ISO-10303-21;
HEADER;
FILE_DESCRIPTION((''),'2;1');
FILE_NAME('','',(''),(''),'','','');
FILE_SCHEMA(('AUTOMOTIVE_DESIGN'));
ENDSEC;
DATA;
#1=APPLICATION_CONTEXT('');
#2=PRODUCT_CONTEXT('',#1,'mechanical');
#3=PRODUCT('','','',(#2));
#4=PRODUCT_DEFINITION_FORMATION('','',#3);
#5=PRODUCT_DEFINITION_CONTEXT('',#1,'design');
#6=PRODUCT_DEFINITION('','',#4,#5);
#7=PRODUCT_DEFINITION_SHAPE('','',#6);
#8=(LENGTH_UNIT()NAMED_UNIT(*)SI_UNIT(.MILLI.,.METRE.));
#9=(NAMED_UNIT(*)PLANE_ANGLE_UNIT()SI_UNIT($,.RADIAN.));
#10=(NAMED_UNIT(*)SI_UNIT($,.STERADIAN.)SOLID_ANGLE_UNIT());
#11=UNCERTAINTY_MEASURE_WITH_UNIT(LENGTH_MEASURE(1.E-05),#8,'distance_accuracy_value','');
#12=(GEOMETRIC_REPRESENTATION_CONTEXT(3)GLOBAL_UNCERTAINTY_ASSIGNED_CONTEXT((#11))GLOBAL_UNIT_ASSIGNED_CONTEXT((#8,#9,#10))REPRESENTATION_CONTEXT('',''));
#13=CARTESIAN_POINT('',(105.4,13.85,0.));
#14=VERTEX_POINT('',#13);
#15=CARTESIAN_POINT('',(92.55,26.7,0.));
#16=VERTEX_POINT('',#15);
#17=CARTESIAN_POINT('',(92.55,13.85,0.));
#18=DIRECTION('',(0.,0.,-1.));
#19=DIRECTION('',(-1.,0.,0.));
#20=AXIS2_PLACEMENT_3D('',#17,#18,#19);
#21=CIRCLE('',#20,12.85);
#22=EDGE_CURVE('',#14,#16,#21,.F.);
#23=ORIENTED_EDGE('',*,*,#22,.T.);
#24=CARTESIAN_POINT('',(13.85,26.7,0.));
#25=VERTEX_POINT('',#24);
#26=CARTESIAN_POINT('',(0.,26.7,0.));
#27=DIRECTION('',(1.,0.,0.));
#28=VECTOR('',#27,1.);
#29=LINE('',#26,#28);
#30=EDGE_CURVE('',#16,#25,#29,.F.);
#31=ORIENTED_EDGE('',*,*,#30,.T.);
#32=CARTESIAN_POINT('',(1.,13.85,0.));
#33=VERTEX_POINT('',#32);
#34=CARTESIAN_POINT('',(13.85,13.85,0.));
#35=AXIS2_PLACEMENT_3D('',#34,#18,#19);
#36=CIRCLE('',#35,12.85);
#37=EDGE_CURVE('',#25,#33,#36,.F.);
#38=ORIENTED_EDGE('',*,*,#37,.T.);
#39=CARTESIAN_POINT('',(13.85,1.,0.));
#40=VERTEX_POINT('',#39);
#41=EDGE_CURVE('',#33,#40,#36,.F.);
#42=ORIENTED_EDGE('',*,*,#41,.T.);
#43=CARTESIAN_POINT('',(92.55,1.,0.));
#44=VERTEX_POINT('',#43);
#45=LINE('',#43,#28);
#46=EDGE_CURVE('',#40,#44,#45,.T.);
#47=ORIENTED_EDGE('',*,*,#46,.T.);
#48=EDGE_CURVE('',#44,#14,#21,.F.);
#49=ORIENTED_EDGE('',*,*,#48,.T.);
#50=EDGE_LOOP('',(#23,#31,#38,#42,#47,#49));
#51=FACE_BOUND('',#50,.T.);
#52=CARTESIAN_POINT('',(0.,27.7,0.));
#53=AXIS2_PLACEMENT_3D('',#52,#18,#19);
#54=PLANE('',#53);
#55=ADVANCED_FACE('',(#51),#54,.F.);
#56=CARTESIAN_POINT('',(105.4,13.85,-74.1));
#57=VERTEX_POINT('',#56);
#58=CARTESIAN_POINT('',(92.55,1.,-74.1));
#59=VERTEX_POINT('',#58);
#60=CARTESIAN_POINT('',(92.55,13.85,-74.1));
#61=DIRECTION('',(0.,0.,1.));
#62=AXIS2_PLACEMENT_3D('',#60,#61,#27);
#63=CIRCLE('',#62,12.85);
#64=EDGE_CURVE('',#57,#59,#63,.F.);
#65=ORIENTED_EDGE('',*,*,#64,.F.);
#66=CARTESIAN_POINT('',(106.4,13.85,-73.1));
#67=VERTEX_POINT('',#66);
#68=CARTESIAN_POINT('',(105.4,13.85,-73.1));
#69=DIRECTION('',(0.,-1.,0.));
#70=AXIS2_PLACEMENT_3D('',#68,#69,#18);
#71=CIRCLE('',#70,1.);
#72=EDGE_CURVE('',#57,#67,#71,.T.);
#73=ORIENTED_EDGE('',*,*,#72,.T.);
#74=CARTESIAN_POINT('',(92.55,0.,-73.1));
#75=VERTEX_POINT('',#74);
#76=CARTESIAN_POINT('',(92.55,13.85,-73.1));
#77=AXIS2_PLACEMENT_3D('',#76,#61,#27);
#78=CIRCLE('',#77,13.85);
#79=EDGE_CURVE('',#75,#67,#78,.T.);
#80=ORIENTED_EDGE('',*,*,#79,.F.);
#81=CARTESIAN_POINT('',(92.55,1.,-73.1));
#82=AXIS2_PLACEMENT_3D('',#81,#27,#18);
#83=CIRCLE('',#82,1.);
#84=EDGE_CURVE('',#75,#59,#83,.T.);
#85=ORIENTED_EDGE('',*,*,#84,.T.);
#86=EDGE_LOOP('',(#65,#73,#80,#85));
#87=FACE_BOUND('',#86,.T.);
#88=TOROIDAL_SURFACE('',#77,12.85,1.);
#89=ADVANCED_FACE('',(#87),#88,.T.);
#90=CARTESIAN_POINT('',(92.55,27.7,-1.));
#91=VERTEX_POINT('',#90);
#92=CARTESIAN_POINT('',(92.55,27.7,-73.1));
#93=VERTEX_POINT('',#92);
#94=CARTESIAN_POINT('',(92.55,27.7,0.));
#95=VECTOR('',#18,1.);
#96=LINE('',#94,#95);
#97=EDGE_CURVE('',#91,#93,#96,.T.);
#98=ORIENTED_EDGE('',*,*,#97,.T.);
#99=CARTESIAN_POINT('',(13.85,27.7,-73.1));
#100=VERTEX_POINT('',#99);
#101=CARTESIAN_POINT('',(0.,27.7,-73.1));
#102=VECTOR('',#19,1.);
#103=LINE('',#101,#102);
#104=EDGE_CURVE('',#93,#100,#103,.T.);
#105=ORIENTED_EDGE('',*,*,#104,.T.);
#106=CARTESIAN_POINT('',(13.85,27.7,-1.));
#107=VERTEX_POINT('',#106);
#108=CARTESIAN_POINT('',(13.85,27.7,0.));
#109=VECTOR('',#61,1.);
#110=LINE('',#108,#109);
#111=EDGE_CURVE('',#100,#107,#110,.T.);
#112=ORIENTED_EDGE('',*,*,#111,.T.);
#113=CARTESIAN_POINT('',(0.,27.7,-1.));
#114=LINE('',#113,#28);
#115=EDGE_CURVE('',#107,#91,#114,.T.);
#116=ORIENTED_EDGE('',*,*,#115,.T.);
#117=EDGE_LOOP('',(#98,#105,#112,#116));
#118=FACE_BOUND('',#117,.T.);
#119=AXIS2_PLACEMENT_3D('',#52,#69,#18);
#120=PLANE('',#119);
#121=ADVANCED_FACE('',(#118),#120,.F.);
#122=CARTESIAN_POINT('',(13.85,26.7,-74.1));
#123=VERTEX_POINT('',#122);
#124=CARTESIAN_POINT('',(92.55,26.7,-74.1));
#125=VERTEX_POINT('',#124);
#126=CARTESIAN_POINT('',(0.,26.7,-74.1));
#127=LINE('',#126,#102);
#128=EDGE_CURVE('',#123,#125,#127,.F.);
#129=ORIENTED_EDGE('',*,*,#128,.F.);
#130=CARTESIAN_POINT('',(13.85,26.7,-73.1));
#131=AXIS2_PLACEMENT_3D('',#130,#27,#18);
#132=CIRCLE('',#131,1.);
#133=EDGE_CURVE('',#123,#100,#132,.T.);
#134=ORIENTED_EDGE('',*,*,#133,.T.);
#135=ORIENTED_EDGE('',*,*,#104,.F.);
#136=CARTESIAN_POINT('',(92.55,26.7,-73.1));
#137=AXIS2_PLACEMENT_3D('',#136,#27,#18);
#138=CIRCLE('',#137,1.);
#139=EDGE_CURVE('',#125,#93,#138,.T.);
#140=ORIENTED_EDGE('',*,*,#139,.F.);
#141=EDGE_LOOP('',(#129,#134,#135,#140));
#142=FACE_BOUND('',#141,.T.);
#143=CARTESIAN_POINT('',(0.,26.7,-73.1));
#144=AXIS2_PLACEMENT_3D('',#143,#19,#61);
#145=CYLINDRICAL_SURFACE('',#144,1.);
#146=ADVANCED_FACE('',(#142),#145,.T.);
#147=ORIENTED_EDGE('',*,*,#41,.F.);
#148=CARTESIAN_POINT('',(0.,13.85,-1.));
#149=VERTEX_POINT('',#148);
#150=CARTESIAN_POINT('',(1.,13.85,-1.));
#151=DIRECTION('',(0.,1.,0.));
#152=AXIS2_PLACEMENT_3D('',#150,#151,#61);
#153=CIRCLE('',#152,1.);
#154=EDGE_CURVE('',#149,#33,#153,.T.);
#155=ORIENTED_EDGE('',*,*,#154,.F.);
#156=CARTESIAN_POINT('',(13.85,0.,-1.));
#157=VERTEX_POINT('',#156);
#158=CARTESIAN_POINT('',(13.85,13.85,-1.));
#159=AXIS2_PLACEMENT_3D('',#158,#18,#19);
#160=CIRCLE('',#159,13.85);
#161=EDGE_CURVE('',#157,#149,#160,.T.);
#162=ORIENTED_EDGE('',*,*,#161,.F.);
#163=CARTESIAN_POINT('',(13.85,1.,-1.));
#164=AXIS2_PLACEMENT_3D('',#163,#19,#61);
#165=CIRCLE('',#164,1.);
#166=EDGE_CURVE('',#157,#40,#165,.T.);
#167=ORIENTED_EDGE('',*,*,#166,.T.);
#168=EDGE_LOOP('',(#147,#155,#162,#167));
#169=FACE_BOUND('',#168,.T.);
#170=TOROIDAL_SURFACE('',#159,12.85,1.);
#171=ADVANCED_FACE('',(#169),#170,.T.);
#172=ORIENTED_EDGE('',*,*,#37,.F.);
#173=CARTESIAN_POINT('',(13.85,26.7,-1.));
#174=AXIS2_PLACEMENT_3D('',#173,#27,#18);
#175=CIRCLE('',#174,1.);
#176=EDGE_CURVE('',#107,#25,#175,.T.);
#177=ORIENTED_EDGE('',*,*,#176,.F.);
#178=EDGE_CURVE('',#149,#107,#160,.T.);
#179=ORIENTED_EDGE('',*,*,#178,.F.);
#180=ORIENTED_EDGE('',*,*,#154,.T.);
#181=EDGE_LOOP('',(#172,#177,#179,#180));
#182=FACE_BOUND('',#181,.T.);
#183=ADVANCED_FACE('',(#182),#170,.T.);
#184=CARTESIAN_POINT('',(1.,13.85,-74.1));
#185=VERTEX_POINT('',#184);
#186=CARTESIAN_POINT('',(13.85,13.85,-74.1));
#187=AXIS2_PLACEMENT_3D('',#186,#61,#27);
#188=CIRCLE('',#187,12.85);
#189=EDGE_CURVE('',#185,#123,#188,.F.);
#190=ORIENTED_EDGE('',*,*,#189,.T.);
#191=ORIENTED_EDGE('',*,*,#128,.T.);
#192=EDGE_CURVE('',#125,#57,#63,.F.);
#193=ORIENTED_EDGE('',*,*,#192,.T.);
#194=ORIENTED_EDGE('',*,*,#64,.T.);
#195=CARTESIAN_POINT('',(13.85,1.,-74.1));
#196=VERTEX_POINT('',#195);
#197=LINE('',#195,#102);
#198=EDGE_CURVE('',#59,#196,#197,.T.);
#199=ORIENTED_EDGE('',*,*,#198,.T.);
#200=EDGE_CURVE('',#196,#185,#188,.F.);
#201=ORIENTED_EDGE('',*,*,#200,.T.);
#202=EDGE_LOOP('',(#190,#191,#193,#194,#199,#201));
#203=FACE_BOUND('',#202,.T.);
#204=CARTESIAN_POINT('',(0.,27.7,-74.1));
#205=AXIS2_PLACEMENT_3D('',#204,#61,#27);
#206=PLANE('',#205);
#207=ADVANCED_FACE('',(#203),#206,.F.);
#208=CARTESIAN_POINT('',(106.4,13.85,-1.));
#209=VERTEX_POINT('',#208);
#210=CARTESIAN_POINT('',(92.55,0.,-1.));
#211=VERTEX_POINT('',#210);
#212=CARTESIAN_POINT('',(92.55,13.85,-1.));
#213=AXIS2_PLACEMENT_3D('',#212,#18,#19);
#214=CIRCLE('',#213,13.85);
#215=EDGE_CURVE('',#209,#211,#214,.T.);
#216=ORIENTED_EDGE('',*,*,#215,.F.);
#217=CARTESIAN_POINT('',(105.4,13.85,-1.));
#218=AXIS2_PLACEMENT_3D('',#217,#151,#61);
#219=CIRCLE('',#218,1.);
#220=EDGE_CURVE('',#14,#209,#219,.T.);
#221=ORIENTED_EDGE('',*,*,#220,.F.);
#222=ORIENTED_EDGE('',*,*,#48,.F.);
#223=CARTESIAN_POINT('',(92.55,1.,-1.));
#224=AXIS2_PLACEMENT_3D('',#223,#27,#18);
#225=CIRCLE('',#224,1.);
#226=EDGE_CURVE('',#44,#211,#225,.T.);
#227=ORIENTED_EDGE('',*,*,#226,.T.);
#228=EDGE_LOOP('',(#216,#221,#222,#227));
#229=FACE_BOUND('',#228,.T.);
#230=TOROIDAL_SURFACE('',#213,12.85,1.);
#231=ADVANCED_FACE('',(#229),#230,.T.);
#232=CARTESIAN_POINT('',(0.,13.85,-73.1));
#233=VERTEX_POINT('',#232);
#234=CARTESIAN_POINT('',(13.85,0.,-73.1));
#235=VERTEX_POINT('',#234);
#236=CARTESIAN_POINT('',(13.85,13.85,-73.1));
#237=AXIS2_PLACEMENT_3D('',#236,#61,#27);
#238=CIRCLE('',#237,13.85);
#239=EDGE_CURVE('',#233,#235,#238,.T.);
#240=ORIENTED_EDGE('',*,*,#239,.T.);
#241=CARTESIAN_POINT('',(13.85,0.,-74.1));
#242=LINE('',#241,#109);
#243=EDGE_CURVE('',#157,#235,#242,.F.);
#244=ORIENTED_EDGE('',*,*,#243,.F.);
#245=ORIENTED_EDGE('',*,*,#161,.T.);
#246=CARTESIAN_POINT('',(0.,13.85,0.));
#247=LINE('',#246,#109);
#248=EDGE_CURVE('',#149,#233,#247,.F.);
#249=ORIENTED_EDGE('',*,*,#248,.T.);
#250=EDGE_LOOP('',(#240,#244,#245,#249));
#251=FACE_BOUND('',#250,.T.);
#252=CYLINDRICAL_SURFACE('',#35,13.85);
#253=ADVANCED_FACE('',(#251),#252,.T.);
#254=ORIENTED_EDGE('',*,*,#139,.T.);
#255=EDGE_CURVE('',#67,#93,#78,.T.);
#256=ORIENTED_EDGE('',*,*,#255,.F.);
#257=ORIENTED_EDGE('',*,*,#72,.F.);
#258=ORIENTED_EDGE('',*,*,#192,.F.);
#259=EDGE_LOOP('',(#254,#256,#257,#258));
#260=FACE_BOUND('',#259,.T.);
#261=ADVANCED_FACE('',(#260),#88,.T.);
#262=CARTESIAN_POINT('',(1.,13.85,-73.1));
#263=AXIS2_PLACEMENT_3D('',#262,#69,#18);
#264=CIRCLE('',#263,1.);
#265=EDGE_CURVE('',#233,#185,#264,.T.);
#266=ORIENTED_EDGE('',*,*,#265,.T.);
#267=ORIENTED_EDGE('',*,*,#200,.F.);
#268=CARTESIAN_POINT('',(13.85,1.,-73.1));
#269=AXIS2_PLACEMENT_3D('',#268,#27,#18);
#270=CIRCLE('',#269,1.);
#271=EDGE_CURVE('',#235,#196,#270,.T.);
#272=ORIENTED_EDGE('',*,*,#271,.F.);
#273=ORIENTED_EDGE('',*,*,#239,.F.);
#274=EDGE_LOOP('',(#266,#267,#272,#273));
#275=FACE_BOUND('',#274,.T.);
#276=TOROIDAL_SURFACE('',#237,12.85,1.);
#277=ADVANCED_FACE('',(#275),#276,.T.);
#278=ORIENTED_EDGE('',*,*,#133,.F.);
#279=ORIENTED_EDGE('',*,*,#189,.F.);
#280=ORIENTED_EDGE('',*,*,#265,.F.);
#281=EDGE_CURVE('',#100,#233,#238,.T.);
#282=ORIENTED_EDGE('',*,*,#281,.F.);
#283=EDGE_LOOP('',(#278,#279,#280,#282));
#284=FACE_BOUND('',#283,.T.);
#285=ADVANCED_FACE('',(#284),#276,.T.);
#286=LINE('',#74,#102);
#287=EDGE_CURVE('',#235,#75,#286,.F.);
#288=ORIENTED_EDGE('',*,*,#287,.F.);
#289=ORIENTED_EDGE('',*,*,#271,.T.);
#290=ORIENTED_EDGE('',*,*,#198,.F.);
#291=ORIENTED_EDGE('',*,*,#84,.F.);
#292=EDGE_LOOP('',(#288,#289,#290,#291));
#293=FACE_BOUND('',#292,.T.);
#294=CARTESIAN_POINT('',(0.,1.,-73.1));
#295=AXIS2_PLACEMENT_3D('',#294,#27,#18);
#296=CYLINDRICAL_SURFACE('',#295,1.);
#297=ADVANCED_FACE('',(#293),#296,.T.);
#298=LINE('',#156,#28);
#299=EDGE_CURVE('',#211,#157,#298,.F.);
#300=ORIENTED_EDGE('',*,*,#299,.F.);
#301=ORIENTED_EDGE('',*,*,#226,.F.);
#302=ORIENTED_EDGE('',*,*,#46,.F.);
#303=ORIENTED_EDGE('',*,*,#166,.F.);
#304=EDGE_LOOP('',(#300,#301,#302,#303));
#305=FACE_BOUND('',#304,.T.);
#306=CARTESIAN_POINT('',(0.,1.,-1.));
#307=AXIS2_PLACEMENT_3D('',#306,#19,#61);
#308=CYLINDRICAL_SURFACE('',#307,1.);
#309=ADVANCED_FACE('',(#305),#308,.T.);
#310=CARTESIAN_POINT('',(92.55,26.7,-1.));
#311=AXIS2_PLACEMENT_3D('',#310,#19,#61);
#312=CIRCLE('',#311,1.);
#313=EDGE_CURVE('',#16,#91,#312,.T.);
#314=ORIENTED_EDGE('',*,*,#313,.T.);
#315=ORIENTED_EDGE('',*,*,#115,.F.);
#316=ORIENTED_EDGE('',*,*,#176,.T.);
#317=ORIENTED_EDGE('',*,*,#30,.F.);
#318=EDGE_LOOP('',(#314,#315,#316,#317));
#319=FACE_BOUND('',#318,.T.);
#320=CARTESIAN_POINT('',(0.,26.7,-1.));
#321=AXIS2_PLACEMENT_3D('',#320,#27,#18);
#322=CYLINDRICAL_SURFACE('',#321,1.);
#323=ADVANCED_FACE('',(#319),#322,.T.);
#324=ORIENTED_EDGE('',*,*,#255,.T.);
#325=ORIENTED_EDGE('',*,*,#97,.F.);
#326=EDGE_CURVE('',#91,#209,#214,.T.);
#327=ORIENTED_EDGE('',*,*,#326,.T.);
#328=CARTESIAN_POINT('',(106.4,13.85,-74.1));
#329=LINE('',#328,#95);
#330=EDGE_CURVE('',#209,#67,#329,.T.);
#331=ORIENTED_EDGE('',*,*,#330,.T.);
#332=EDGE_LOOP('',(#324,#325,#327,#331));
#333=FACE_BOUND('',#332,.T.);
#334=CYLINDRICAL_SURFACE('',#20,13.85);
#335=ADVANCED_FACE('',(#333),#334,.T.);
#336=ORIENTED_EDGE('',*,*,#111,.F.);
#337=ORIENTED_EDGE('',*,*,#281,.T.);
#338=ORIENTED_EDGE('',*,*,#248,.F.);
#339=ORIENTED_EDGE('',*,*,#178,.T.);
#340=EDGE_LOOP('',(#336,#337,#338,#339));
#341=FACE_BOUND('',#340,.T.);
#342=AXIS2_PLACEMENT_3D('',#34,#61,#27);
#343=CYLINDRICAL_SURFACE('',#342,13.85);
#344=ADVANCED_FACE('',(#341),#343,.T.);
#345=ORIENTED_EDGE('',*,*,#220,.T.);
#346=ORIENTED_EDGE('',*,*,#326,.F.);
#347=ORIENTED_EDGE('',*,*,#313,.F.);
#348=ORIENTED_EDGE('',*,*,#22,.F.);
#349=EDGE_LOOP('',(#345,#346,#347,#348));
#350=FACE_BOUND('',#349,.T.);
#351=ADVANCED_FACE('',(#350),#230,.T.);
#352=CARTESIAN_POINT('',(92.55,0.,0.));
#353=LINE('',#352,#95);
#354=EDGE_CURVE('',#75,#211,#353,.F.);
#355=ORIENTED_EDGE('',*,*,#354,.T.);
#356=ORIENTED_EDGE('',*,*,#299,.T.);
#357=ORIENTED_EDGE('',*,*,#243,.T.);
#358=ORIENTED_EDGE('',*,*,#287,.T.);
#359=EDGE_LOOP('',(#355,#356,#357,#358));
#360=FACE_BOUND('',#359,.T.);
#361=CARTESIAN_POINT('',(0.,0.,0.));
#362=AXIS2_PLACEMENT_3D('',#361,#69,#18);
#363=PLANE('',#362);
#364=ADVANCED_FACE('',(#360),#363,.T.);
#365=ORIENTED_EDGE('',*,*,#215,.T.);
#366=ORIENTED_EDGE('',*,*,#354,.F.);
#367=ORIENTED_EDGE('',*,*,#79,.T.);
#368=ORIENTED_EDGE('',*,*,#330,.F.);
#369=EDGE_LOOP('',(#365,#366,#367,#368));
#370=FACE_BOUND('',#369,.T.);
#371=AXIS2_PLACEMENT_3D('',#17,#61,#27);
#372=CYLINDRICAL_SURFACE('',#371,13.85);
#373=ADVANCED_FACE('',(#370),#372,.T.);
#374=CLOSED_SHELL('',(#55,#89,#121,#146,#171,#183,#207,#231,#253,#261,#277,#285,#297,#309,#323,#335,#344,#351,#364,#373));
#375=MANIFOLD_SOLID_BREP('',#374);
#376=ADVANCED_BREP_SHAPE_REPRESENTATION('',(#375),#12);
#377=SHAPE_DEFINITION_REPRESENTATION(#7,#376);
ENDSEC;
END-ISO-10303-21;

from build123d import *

# Parameters (mm, degrees)
ESQUISSE1_W        = 106.4
ESQUISSE1_H        = 74.1
BOSS_EXTRU_1_DEPTH = 27.7
CONG_2_R           = 13.85
CONG_3_R           = 1


with BuildPart() as part:
    # Esquisse1 → Boss.-Extru.1 (new body)
    with BuildSketch(Plane(origin=(0, 0, 0), x_dir=(1, 0, 0), z_dir=(0, 1, 0))):
        with Locations((53.2, 37.05)):
            Rectangle(ESQUISSE1_W, ESQUISSE1_H)
    extrude(amount=BOSS_EXTRU_1_DEPTH)

    # Congé2
    cong_2_edges = [part.edges().sort_by_distance(p)[0] for p in [
        (0, 0, -37.05),
        (0, 27.7, -37.05),
        (106.4, 27.7, -37.05),
        (106.4, 0, -37.05),
    ]]
    fillet(cong_2_edges, radius=CONG_2_R - 0.0001)  # a hair under: the kernel refuses the full size

    # Congé3
    cong_3_edges = [part.edges().sort_by_distance(p)[0] for p in [
        (53.2, 0, 0),
        (53.2, 27.7, 0),
        (102.343458209, 4.056541791, 0),
        (102.343458209, 23.643458209, 0),
        (4.056541791, 23.643458209, 0),
        (4.056541791, 4.056541791, 0),
        (53.2, 0, -74.1),
        (53.2, 27.7, -74.1),
        (102.343458209, 4.056541791, -74.1),
        (102.343458209, 23.643458209, -74.1),
        (4.056541791, 23.643458209, -74.1),
        (4.056541791, 4.056541791, -74.1),
    ]]
    fillet(cong_3_edges, radius=CONG_3_R)


solid = part.part
